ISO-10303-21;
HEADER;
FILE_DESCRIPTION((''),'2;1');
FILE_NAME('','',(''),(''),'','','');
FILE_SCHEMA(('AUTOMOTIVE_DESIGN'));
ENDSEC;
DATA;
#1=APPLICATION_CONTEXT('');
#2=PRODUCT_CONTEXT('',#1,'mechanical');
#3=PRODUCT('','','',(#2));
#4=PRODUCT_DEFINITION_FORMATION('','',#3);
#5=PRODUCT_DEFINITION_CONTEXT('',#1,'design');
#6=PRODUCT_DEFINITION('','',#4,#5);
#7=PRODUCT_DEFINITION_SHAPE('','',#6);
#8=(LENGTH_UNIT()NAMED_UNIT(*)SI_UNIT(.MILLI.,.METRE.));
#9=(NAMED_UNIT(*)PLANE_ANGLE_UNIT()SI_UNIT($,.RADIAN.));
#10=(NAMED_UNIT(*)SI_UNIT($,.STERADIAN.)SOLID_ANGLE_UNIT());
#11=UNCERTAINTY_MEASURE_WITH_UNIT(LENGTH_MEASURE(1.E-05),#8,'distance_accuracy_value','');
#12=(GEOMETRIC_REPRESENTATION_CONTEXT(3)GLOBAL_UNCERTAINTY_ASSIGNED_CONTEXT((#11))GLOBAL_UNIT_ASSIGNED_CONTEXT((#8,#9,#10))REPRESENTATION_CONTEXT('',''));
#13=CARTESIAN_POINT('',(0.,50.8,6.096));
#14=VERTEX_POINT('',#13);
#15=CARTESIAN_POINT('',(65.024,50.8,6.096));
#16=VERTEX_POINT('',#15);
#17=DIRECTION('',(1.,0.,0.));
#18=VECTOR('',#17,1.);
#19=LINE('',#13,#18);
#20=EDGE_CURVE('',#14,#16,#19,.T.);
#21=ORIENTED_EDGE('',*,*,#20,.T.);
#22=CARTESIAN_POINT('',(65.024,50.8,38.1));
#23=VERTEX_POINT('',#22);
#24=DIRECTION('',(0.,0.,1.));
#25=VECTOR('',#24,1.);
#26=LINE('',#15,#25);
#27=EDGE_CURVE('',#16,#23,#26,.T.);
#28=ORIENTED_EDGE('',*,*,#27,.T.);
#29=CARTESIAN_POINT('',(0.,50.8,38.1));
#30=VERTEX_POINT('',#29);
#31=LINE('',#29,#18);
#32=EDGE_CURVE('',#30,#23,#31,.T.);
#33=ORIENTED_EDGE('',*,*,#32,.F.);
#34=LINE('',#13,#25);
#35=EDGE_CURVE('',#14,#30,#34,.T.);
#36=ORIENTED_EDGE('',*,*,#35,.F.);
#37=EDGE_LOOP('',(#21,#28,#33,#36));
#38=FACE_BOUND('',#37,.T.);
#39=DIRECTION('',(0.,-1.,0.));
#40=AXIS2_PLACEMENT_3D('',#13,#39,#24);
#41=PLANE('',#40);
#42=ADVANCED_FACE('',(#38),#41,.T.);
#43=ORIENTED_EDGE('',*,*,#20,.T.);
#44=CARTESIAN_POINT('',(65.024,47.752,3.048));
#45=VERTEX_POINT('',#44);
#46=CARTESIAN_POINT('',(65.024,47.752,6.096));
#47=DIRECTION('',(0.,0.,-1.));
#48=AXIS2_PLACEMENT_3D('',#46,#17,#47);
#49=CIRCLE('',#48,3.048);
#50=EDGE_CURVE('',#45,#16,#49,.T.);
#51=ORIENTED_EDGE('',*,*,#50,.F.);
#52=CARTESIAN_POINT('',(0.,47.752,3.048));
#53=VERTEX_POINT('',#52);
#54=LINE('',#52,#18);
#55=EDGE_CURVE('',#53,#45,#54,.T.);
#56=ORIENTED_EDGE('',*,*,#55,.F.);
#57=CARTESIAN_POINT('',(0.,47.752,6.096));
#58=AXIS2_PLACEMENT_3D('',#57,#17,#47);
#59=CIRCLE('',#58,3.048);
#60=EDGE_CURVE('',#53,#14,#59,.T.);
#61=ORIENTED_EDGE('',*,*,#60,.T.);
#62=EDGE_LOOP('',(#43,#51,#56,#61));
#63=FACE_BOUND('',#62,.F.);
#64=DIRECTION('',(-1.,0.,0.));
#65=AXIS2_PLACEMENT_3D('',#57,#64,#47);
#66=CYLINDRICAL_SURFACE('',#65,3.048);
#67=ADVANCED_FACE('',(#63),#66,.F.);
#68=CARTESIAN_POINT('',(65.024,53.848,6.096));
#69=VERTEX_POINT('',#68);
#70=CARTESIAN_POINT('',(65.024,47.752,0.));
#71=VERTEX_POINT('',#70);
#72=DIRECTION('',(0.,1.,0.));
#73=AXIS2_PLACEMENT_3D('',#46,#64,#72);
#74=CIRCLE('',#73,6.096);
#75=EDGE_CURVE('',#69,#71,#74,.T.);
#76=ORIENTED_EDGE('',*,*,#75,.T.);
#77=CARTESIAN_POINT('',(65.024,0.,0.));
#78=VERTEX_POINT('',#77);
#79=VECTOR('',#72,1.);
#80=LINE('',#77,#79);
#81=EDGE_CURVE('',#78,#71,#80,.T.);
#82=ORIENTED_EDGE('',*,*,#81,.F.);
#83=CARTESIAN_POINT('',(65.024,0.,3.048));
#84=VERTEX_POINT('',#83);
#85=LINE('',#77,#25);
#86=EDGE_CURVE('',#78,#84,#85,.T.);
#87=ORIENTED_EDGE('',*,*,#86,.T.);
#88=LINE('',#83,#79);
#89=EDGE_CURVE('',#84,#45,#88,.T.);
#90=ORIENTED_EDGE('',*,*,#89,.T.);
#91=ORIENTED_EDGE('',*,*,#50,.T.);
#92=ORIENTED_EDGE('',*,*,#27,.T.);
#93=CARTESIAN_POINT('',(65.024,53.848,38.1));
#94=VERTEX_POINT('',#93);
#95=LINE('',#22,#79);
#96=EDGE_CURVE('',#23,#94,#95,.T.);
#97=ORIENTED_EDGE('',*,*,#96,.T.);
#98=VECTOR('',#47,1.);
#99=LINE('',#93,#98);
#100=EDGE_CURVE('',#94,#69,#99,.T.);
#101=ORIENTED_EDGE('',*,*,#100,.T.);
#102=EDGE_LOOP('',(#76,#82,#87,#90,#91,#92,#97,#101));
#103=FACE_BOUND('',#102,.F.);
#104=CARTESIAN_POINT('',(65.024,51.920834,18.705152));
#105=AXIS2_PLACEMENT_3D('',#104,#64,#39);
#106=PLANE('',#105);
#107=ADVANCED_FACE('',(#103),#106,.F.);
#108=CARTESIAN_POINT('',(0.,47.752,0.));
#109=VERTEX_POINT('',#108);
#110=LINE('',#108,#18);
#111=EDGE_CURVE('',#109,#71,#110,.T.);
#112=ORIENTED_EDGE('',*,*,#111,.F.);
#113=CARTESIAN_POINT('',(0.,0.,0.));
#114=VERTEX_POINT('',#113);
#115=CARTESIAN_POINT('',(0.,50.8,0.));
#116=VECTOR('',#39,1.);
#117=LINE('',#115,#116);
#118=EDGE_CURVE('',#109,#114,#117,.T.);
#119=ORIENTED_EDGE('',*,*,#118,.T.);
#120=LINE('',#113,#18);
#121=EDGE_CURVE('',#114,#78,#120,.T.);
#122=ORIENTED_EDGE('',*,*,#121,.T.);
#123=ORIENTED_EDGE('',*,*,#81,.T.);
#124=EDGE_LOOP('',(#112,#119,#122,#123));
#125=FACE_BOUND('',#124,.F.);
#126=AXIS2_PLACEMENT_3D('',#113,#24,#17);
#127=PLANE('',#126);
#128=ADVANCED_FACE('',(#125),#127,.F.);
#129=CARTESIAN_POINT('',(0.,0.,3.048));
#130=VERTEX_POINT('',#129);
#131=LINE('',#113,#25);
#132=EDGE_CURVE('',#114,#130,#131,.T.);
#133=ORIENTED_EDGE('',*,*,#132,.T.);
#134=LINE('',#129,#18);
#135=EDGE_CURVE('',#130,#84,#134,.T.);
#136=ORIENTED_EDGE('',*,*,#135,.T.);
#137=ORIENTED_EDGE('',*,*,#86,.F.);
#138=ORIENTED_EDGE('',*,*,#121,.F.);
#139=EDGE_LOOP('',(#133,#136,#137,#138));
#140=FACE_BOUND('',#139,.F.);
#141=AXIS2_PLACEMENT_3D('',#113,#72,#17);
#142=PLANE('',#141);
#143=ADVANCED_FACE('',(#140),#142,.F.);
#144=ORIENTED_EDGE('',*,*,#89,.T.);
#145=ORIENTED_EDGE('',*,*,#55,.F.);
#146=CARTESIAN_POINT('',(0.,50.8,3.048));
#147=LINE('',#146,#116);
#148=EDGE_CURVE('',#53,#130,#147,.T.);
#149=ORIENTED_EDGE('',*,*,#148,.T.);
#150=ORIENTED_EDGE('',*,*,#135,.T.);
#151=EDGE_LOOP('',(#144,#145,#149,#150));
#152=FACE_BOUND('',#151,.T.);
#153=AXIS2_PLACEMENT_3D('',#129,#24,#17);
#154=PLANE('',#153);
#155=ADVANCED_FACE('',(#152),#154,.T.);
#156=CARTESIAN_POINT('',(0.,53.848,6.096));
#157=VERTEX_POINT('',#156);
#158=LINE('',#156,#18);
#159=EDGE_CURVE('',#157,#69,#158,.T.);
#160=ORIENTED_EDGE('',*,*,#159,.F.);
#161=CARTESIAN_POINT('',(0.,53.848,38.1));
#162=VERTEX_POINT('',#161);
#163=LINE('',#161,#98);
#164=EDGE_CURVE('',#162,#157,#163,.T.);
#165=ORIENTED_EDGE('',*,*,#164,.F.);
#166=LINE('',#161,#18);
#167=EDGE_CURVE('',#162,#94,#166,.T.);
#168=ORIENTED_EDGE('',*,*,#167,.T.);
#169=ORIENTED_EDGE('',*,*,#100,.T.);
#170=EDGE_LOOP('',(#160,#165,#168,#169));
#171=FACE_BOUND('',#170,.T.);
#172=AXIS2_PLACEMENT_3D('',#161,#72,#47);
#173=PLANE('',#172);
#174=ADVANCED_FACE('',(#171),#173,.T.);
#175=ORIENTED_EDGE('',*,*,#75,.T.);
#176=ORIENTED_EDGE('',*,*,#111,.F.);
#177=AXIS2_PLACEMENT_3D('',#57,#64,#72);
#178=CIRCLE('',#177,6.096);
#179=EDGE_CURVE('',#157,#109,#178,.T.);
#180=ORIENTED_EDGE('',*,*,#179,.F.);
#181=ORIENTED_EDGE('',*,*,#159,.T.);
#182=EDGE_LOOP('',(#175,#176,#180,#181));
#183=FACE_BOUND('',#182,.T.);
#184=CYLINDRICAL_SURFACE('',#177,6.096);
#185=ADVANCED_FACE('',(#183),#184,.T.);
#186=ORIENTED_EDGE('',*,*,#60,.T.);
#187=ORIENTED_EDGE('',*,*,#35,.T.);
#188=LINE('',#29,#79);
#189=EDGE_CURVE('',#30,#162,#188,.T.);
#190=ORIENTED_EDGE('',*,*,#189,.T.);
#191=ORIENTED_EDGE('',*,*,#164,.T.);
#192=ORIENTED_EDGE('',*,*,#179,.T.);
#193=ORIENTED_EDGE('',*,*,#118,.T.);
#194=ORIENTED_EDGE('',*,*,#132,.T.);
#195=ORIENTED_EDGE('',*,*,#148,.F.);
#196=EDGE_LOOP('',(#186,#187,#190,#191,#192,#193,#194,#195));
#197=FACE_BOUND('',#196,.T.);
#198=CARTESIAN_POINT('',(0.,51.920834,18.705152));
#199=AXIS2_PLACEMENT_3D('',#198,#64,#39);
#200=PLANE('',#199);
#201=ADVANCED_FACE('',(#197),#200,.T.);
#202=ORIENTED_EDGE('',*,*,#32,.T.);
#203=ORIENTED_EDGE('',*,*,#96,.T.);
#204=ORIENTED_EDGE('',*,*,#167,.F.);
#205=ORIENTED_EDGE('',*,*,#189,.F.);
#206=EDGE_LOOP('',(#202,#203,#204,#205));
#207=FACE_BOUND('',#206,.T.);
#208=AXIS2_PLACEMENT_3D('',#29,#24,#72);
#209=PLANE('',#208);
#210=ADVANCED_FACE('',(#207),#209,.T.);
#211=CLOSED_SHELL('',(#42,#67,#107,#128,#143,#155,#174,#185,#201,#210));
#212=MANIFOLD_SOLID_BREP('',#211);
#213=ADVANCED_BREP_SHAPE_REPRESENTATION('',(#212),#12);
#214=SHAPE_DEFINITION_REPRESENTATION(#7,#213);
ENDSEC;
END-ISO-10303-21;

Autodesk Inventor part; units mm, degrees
ref_plane "YZ Plane" through (0, 0, 0) normal (1, 0, 0) x (0, 1, 0)
ref_plane "XZ Plane" through (0, 0, 0) normal (0, 1, 0) x (-1, 0, 0)
ref_plane "XY Plane" through (0, 0, 0) normal (0, 0, 1) x (1, 0, 0)
sketch "Sketch1" plane through (0, 0, 0) normal (0, 0, 1) x (1, 0, 0)
  line L0 (0, 0) -> (65.024, 0)
  line L1 (65.024, 0) -> (65.024, 50.8)
  line L2 (65.024, 50.8) -> (0, 50.8)
  line L3 (0, 50.8) -> (0, 0)
  dimension "d0" = 65.024
  dimension "d1" = 50.8
extrude "Plate1" add sketch "Sketch1" along normal blind 3.048
sketch "Sketch2" plane through (0, 50.8, 3.048) normal (0, 1, 0) x (-1, 0, 0)
  line L0 (-65.024, 0) -> (0, 0)
  line L1 (0, 0) -> (0, 35.052)
  line L2 (0, 35.052) -> (-65.024, 35.052)
  line L3 (-65.024, 35.052) -> (-65.024, 0)
edge flange "Flange1" height 38.1 angle 90 thickness 3.048 bend radius 3.048 thickness toward (0, 1, 0) relief tear relief width 3.048 relief depth 1.524 edges at (32.512, 50.8, 3.048) wall of the first edge with corners at (65.024, 50.8, 3.048) (0, 50.8, 3.048) (0, 50.8, 38.1) (65.024, 50.8, 38.1)
bend "Bend1"
corner "Corner1"
equation "\"d3\" = BendReliefWidth"
equation "\"d4\" = BendReliefDepth"
equation "\"d5\" = MinimumRemnant"
equation "\"d6\" = BendRadius"
equation "\"d9\" = BendRadius"
equation "\"d10\" = CornerReliefSize"
equation "\"d11\" = GapSize"
equation "\"d12\" = JacobiRadiusSize"
equation "\"BendRadius\" = Thickness"
equation "\"BendReliefWidth\" = Thickness"
equation "\"BendReliefDepth\" = 0.5 * Thickness"
equation "\"CornerReliefSize\" = 4 * Thickness"
equation "\"MinimumRemnant\" = 2 * Thickness"
equation "\"TransitionRadius\" = BendRadius"
equation "\"JacobiRadiusSize\" = BendRadius"
equation "\"GapSize\" = Thickness"
equation "\"d2\" = BendRadius"
equation "\"Thickness\" = 3.048"
properties part number "Chain - L Bracket"
